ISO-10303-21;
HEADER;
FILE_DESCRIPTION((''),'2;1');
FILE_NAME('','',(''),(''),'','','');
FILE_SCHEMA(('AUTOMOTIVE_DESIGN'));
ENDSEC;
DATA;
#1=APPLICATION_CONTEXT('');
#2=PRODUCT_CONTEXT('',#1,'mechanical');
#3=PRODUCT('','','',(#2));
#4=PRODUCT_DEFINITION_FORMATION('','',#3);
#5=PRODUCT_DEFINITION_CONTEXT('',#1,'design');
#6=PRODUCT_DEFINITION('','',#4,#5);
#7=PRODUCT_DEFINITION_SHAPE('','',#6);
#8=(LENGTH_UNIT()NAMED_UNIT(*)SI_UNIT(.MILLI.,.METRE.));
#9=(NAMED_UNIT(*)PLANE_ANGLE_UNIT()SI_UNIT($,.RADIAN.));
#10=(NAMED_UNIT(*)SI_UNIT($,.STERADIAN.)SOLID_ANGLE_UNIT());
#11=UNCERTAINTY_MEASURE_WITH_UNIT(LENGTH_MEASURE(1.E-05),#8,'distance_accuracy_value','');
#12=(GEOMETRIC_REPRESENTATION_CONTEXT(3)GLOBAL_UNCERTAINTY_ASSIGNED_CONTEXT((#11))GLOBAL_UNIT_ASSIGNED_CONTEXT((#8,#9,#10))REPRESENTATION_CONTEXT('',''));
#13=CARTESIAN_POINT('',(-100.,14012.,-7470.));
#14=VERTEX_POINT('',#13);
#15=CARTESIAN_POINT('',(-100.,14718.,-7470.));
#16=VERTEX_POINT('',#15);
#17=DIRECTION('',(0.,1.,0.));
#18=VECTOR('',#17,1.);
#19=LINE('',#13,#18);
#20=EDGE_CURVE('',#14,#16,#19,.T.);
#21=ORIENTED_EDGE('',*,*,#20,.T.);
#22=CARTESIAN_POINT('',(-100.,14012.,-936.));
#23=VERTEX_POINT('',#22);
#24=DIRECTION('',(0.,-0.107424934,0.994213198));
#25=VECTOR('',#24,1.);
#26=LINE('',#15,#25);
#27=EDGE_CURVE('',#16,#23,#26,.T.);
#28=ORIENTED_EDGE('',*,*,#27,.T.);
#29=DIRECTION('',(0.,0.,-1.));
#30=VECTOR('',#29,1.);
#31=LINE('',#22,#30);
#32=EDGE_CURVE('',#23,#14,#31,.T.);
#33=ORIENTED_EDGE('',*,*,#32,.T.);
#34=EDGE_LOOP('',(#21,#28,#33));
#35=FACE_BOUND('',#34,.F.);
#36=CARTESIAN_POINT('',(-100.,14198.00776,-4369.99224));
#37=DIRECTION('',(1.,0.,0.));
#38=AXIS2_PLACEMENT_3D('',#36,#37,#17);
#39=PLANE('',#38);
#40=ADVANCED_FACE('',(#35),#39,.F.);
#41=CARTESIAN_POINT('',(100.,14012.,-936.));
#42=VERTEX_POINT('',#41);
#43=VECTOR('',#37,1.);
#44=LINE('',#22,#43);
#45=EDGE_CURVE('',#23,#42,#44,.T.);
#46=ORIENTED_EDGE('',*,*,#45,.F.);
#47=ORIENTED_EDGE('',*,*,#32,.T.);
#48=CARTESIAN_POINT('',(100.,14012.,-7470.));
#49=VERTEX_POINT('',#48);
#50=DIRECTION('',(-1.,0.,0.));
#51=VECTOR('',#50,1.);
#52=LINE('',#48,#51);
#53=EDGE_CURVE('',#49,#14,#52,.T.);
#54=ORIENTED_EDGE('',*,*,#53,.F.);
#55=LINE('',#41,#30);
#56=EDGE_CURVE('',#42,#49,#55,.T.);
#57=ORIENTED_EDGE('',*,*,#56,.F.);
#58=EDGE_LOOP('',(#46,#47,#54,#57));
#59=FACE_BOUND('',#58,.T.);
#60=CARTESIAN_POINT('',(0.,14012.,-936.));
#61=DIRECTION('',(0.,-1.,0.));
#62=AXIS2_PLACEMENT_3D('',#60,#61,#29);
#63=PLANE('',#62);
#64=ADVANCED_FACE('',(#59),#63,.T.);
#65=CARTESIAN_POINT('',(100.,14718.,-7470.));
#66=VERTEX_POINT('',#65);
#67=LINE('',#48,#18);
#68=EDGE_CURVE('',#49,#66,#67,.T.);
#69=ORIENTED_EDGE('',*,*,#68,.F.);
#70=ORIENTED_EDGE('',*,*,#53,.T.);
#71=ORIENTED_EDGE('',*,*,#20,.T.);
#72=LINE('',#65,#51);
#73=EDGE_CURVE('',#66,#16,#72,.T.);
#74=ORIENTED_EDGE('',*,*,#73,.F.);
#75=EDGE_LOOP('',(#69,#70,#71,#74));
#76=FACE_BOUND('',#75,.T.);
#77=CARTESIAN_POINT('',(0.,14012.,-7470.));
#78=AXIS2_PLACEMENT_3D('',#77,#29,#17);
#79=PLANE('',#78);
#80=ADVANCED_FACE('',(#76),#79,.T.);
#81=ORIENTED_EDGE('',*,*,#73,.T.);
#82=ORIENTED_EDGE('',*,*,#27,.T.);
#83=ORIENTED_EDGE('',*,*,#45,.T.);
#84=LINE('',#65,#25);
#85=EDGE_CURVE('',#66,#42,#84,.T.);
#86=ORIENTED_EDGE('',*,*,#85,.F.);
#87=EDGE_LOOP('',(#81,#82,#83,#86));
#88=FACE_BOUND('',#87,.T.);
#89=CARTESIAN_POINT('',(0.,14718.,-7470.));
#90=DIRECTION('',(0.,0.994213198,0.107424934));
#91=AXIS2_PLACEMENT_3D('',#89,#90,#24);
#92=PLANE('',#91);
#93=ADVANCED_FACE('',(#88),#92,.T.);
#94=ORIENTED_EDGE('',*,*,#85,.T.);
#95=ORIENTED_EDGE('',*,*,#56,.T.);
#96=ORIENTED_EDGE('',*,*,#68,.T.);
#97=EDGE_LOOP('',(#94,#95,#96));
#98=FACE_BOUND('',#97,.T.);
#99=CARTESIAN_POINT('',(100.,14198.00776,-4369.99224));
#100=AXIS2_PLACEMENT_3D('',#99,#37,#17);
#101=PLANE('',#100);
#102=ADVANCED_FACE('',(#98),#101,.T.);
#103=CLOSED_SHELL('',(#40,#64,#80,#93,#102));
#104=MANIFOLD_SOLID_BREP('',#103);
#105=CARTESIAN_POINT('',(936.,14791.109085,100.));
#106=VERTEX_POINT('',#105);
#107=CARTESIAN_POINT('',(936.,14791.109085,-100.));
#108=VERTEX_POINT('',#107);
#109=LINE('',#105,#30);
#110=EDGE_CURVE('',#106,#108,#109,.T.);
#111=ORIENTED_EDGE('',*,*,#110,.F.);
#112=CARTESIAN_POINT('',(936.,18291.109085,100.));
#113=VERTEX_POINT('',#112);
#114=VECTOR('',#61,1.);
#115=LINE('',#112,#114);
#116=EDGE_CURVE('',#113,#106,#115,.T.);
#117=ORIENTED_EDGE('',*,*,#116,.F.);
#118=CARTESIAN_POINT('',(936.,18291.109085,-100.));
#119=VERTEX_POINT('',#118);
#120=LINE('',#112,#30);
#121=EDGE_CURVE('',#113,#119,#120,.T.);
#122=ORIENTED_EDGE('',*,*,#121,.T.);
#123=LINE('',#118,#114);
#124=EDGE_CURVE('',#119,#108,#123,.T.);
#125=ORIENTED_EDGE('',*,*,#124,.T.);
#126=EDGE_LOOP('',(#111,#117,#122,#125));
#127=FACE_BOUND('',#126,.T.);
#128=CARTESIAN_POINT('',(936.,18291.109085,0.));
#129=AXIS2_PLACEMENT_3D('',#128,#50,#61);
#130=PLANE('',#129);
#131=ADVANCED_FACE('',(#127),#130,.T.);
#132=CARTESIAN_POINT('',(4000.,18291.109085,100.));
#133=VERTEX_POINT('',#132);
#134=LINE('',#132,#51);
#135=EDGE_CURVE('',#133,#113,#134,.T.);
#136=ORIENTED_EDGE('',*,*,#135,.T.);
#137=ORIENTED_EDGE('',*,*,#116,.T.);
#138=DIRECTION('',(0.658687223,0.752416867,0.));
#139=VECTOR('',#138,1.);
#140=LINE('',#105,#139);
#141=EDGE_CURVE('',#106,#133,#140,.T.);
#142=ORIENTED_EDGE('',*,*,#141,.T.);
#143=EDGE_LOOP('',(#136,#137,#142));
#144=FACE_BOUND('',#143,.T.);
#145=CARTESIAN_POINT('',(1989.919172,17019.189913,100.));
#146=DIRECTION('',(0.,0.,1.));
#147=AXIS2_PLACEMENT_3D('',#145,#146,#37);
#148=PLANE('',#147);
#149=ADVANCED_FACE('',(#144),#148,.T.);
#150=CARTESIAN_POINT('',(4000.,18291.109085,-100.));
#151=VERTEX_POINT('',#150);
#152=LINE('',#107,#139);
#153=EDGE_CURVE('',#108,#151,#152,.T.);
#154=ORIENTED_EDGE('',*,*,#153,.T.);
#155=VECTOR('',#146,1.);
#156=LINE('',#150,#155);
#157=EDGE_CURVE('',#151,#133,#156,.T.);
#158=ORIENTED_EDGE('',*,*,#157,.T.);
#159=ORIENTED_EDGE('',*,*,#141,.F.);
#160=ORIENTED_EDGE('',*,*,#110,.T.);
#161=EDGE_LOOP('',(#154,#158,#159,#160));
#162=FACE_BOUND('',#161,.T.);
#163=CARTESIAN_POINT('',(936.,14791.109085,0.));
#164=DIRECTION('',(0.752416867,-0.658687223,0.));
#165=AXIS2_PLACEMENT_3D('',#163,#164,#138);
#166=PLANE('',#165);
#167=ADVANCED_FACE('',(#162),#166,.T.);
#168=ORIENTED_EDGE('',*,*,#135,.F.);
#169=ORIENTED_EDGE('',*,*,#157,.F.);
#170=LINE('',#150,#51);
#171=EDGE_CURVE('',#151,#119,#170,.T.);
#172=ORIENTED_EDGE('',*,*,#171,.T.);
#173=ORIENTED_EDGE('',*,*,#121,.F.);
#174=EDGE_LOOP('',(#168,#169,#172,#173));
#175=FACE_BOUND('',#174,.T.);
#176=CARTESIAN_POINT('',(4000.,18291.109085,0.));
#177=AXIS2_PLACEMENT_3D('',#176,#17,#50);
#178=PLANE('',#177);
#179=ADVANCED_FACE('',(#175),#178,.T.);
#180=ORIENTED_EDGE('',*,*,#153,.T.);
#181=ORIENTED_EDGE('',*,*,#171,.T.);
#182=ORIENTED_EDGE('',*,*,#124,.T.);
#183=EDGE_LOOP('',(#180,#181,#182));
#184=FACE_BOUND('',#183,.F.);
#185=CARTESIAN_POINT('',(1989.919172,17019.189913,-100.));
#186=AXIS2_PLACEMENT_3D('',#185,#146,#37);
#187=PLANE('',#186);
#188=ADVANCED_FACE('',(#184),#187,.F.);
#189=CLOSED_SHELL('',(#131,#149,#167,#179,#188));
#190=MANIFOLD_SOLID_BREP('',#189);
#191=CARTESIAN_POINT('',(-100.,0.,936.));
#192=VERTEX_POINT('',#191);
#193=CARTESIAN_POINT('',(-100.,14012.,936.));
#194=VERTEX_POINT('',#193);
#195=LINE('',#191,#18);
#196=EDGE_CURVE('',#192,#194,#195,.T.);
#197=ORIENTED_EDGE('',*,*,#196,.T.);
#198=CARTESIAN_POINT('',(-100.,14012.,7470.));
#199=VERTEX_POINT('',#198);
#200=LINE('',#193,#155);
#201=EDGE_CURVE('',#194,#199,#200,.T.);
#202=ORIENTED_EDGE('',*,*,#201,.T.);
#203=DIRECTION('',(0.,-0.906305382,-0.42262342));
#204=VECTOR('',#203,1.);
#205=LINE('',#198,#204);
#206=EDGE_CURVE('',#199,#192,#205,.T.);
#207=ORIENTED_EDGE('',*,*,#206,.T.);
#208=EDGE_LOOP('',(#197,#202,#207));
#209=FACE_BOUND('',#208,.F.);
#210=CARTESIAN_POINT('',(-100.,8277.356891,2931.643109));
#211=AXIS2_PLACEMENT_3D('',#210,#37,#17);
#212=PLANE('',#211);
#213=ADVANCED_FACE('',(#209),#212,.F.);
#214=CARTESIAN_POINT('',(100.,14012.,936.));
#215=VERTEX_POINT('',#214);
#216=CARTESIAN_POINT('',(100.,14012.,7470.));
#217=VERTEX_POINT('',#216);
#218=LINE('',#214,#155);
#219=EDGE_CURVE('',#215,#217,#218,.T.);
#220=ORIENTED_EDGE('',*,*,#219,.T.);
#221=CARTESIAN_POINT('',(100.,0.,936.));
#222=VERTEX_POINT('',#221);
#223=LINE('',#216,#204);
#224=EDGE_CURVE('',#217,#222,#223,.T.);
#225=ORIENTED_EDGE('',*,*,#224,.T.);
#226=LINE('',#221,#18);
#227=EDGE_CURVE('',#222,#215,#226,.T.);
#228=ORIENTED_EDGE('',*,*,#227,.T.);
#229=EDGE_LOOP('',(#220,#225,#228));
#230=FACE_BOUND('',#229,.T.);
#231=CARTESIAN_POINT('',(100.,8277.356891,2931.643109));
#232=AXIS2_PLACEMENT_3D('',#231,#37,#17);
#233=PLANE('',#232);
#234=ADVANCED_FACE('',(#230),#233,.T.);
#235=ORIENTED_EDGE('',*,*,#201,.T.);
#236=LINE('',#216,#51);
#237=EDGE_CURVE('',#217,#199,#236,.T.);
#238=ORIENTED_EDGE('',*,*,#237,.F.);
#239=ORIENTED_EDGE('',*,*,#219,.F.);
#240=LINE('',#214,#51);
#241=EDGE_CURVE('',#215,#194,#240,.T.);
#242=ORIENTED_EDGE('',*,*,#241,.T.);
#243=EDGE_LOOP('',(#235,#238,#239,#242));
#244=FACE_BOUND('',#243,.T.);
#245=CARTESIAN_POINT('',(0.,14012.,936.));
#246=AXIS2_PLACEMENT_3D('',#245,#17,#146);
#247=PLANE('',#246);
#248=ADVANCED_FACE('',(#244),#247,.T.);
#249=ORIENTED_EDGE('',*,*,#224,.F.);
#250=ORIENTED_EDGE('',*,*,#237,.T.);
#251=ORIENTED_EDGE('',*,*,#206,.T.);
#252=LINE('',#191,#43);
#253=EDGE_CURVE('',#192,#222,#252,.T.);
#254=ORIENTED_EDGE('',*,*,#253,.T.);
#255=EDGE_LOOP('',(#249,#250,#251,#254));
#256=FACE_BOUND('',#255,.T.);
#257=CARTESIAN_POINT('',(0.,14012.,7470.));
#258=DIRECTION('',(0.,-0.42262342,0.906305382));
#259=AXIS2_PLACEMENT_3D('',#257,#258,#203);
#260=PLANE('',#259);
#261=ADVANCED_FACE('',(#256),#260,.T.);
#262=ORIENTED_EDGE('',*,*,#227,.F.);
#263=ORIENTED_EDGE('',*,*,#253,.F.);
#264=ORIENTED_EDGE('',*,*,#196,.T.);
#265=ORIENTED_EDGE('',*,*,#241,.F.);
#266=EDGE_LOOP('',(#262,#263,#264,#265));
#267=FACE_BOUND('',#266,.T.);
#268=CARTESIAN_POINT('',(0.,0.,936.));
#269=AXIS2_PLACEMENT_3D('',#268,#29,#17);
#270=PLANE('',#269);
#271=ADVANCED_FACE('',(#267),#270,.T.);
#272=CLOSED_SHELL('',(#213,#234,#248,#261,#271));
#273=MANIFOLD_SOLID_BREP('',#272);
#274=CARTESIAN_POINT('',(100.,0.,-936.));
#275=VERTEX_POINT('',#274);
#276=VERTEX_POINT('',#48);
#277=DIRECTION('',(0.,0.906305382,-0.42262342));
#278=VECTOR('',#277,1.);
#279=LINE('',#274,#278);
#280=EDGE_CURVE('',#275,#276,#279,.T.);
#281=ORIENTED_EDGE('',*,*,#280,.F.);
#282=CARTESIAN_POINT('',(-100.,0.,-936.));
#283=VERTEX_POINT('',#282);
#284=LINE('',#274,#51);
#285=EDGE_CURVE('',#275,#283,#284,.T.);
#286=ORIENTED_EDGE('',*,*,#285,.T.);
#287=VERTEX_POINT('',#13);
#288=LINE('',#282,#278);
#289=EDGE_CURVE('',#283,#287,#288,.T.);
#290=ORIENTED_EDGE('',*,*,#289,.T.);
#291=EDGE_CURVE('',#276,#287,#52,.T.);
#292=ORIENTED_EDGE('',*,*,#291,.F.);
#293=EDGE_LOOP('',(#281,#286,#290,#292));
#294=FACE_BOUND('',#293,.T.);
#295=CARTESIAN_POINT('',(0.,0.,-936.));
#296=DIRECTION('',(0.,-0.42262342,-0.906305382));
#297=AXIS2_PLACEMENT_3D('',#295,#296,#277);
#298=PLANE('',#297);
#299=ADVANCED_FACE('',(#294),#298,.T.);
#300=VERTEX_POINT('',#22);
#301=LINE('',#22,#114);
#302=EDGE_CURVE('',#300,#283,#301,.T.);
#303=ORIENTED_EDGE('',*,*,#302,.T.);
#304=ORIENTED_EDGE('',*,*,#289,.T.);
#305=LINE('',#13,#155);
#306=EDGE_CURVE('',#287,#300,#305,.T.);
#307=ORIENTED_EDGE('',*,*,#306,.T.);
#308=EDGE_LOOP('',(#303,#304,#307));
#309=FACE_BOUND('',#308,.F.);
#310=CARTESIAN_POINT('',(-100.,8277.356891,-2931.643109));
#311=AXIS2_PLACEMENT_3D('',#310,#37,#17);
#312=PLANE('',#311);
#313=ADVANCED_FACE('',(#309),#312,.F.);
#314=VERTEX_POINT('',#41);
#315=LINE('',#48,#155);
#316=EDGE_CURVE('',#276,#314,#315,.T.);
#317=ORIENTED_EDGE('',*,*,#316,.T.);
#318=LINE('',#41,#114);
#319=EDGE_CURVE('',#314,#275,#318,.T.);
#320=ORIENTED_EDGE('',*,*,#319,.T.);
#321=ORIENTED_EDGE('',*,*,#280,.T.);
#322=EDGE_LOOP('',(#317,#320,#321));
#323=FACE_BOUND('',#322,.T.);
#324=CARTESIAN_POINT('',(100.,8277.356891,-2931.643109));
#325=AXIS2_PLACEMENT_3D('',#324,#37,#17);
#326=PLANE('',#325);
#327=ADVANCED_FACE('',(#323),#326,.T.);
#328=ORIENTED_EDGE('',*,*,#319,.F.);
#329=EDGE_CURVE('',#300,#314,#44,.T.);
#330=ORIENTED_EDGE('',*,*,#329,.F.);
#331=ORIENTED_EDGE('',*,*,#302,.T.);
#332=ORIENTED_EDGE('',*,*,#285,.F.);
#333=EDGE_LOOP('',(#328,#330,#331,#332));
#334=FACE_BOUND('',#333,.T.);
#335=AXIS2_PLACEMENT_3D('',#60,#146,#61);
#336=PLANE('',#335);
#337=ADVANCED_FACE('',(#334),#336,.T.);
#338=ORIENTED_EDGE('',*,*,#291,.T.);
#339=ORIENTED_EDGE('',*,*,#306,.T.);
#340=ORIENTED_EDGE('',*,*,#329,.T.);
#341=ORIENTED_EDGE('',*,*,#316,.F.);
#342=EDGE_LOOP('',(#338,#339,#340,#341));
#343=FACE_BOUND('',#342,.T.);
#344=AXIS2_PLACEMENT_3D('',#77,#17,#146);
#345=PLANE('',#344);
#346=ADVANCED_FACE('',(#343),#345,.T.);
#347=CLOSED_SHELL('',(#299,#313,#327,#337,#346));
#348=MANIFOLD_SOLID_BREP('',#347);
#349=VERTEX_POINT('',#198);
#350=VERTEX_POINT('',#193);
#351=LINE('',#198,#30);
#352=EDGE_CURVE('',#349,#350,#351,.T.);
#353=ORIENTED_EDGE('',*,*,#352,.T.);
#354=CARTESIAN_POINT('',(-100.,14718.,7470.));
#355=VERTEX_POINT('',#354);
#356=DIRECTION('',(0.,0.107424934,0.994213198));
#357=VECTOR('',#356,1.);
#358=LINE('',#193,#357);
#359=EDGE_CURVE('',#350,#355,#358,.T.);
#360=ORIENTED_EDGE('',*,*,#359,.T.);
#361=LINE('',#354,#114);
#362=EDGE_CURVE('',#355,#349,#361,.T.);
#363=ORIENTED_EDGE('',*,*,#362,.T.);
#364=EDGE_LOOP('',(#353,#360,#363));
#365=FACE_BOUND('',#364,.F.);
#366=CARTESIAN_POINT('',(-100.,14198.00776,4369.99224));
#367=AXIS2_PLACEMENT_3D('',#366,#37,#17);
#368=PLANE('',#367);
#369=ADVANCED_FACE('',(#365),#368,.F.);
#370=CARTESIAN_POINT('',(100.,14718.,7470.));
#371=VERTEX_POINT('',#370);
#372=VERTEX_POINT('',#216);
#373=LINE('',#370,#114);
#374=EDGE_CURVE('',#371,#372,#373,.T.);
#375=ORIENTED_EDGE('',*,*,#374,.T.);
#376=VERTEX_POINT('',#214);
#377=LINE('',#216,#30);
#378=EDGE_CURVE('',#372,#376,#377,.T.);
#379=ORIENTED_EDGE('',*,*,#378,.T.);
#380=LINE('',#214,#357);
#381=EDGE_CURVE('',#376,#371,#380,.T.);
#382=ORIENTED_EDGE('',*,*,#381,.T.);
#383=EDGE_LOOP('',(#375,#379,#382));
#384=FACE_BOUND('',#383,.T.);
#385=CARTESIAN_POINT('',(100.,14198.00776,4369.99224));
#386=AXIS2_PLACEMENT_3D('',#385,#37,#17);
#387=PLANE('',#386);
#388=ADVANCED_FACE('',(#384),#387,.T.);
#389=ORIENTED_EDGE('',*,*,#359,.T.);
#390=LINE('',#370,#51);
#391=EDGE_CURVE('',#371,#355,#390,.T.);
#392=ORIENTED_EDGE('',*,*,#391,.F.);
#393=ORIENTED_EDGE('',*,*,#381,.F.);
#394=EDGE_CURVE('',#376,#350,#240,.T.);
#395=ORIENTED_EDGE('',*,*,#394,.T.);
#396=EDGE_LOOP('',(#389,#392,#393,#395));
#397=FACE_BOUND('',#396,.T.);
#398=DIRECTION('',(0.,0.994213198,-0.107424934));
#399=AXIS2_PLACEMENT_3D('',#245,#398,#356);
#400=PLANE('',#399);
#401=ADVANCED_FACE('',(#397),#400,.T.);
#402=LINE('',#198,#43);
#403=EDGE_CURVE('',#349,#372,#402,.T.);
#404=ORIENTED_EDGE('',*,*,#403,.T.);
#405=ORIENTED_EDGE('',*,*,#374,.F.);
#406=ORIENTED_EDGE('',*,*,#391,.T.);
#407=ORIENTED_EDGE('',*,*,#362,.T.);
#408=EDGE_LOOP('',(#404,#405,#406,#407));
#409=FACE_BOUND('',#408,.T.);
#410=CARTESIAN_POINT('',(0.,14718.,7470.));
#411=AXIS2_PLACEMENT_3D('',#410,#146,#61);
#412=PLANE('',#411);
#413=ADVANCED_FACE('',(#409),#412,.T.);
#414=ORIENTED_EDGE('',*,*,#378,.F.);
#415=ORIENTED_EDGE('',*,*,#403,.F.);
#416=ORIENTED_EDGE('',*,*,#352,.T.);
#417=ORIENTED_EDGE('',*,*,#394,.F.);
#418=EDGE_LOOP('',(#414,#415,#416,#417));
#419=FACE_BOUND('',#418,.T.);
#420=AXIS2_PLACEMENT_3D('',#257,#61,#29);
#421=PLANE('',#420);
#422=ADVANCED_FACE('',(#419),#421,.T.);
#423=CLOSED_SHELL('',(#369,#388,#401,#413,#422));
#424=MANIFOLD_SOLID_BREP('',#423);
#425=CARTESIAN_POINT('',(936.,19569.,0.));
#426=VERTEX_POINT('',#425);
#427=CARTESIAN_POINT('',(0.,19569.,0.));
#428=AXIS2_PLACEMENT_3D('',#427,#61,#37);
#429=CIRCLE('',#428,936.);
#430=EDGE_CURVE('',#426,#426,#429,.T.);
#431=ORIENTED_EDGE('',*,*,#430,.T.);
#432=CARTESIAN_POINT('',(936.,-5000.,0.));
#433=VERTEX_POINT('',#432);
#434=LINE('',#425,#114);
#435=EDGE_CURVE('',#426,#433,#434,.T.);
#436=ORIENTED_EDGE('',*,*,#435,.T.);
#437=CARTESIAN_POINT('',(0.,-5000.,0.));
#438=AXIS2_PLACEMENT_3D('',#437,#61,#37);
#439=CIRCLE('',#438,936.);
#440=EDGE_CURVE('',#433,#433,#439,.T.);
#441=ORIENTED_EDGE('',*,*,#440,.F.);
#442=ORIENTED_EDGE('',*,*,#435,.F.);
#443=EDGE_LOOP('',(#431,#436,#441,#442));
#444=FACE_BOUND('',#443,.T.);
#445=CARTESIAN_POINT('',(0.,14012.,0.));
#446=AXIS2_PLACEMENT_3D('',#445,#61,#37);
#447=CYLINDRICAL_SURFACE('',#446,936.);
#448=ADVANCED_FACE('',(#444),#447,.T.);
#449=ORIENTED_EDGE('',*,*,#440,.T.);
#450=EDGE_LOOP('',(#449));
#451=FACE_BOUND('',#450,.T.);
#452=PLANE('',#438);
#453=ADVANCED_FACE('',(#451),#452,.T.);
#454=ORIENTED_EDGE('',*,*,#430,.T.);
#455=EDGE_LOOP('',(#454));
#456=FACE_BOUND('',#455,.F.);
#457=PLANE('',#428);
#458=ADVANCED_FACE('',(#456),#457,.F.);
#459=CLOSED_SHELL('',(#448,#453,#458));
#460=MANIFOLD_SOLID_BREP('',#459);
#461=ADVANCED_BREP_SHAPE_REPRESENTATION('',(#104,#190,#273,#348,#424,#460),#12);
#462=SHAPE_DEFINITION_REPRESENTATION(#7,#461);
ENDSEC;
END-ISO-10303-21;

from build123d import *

# Parameters (mm, degrees)
F0_R      = 936
F3_DEPTH  = 14012
F4_DEPTH  = 100
F5_DEPTH  = 100
F6_DEPTH  = 5000
F7_DEPTH  = 5557
F11_DEPTH = 100


# Not quite as in the source:
# - the program builds the solid bodies; features that only make, move or delete a surface that nothing else refers to are left out


with BuildPart() as f3:
    # F0 (on Front) → F3 (new body)
    with BuildSketch(Plane.XZ):
        Circle(F0_R)
    extrude(amount=-F3_DEPTH)

    # F6 (add): a face of the model
    f6_faces = [f3.faces().sort_by_distance(p)[0] for p in [
        (0, 0, 0),
    ]]
    extrude(f6_faces, amount=F6_DEPTH)

    # F7 (add): a face of the model
    f7_faces = [f3.faces().sort_by_distance(p)[0] for p in [
        (0, 14012, 0),
    ]]
    extrude(f7_faces, amount=F7_DEPTH)


with BuildPart() as f4:
    # F1 (on Right) → F4 (new body, symmetric)
    with BuildSketch(Plane.YZ):
        Polygon((14012, 7470), (0, 936), (14012, 936), align=None)
    extrude(amount=F4_DEPTH, both=True)


with BuildPart() as f4b:
    # F1 (on Right) → F4, piece 2 (new body, symmetric)
    with BuildSketch(Plane.YZ):
        Polygon((14012, -7470), (14012, -936), (0, -936), align=None)
    extrude(amount=F4_DEPTH, both=True)


with BuildPart() as f5:
    # F2 (on Right) → F5 (new body, symmetric)
    with BuildSketch(Plane.YZ):
        Polygon((14718, 7470), (14012, 7470), (14012, 936), align=None)
    extrude(amount=F5_DEPTH, both=True)


with BuildPart() as f5b:
    # F2 (on Right) → F5, piece 2 (new body, symmetric)
    with BuildSketch(Plane.YZ):
        Polygon((14718, -7470), (14012, -936), (14012, -7470), align=None)
    extrude(amount=F5_DEPTH, both=True)


with BuildPart() as f11:
    # F10 (on Top) → F11 (new body, symmetric)
    with BuildSketch(Plane.XY):
        Polygon((936, 14791.109085083), (4000, 18291.109085083), (936, 18291.109085083), align=None)
    extrude(amount=F11_DEPTH, both=True)


solid = Compound([f3.part, f4.part, f4b.part, f5.part, f5b.part, f11.part])
